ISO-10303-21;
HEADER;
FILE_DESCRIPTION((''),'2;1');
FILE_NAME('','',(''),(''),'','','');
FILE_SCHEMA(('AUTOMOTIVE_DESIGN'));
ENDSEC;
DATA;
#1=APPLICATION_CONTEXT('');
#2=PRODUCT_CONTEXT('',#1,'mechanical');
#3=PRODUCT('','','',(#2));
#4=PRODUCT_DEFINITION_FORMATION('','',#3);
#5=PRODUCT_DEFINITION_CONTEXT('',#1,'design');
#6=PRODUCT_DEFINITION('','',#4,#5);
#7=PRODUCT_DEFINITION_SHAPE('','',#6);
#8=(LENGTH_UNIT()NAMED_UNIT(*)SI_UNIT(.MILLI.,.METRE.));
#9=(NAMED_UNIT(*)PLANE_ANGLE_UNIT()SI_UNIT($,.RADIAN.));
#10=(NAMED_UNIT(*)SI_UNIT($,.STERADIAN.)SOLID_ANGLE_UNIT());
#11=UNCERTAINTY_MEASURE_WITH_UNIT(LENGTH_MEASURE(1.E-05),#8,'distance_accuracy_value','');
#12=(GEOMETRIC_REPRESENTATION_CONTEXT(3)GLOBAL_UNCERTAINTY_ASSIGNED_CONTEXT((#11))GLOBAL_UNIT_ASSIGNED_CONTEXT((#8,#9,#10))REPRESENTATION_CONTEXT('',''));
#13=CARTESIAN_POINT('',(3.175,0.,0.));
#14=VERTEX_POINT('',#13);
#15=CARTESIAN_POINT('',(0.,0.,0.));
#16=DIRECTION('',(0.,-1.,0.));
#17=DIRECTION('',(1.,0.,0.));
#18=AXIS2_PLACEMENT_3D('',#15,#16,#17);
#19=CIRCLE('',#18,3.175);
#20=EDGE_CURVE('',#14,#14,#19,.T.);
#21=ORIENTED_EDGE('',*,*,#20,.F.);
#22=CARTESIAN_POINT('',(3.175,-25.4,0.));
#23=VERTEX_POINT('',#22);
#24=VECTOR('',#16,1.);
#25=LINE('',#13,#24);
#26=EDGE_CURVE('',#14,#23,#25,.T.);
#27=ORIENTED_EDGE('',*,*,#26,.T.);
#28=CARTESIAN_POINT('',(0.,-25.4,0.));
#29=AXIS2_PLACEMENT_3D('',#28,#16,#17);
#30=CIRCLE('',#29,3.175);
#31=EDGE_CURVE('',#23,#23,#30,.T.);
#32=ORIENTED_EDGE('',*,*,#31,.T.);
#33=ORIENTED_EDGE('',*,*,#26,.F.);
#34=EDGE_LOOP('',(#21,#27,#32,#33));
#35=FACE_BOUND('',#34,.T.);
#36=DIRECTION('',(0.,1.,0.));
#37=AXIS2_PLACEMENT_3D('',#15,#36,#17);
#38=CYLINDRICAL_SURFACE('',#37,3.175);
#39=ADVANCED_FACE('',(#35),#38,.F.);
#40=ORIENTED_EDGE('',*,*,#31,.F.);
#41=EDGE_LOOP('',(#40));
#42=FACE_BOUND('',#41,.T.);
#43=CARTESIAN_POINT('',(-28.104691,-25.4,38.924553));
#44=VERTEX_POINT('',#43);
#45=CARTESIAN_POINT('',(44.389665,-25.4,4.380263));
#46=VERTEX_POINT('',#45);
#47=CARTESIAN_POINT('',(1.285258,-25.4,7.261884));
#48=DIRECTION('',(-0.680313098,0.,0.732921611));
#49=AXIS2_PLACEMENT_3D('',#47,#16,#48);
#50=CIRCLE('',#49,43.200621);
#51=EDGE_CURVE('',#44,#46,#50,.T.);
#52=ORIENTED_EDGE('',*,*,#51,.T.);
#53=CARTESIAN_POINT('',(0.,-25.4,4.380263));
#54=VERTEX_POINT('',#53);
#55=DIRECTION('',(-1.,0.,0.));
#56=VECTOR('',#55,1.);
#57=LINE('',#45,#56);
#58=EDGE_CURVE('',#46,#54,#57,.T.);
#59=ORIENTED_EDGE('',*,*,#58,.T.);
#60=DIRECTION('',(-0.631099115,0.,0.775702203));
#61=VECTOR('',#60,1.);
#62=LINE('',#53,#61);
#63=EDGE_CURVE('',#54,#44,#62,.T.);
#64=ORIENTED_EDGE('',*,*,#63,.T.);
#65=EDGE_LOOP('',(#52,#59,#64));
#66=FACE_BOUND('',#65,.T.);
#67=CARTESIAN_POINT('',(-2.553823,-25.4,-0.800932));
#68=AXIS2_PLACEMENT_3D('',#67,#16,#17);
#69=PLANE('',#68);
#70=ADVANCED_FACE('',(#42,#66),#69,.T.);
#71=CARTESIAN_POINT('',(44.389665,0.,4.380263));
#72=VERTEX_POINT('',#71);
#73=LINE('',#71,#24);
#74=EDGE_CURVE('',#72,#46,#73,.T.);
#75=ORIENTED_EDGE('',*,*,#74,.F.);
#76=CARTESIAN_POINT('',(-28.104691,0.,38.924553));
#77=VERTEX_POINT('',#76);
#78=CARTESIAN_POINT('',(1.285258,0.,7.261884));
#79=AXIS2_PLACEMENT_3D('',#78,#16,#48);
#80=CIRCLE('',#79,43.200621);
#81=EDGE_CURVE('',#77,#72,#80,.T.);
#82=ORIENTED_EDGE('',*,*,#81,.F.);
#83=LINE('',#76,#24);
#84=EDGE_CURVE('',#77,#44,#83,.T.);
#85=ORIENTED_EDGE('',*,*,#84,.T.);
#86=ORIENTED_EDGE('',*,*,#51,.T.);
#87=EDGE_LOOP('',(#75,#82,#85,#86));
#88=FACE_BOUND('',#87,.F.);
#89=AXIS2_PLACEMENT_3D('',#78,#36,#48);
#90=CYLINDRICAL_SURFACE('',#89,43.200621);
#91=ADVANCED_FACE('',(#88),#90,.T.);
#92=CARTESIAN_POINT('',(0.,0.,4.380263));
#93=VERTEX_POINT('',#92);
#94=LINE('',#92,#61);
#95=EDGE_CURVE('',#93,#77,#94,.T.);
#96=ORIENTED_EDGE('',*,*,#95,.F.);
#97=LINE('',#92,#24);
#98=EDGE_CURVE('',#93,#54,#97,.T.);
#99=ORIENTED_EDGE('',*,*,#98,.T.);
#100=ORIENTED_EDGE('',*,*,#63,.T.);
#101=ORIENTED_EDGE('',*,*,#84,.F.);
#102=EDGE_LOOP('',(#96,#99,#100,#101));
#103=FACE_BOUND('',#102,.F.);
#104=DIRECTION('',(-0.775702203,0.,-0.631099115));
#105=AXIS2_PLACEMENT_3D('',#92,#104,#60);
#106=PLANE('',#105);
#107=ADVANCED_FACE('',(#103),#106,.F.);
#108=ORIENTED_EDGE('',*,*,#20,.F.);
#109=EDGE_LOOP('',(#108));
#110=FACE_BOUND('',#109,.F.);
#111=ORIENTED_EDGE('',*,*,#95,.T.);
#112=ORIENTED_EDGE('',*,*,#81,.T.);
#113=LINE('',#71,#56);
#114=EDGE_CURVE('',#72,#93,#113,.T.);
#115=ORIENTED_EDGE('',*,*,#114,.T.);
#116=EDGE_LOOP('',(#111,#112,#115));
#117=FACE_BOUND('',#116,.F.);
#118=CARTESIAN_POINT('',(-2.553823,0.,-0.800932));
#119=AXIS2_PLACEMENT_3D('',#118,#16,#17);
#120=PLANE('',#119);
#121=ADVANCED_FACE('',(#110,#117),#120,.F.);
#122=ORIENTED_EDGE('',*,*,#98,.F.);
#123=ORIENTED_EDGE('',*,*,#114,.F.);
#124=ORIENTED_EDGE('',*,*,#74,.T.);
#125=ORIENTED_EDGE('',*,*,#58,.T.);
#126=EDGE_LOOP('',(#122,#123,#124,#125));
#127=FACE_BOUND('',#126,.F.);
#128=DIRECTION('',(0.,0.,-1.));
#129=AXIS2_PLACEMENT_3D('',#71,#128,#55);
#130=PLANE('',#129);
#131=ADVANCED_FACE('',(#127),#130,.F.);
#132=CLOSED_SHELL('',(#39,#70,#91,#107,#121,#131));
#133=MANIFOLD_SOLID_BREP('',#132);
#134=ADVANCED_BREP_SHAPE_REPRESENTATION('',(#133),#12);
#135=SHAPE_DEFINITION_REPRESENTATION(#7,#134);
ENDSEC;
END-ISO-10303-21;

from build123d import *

# Parameters (mm, degrees)
F0_R     = 3.175
F1_DEPTH = 25.4


# Not quite as in the source:
# - a feature names something its author has since deleted; it is built from what else it names


with BuildPart() as f1:
    # F0 (on Front) → F1 (new body)
    with BuildSketch(Plane.XZ):
        with BuildLine():
            Line((44.3896651268, 4.3802629225), (0, 4.3802629225))
            Line((0, 4.3802629225), (-28.1046908349, 38.9245525002))
            ThreePointArc((-28.1046908349, 38.9245525002), (-17.2982990716, -31.7374125613), (44.3896651268, 4.3802629225))
        make_face()
        Circle(F0_R, mode=Mode.SUBTRACT)
    extrude(amount=F1_DEPTH)


solid = f1.part
